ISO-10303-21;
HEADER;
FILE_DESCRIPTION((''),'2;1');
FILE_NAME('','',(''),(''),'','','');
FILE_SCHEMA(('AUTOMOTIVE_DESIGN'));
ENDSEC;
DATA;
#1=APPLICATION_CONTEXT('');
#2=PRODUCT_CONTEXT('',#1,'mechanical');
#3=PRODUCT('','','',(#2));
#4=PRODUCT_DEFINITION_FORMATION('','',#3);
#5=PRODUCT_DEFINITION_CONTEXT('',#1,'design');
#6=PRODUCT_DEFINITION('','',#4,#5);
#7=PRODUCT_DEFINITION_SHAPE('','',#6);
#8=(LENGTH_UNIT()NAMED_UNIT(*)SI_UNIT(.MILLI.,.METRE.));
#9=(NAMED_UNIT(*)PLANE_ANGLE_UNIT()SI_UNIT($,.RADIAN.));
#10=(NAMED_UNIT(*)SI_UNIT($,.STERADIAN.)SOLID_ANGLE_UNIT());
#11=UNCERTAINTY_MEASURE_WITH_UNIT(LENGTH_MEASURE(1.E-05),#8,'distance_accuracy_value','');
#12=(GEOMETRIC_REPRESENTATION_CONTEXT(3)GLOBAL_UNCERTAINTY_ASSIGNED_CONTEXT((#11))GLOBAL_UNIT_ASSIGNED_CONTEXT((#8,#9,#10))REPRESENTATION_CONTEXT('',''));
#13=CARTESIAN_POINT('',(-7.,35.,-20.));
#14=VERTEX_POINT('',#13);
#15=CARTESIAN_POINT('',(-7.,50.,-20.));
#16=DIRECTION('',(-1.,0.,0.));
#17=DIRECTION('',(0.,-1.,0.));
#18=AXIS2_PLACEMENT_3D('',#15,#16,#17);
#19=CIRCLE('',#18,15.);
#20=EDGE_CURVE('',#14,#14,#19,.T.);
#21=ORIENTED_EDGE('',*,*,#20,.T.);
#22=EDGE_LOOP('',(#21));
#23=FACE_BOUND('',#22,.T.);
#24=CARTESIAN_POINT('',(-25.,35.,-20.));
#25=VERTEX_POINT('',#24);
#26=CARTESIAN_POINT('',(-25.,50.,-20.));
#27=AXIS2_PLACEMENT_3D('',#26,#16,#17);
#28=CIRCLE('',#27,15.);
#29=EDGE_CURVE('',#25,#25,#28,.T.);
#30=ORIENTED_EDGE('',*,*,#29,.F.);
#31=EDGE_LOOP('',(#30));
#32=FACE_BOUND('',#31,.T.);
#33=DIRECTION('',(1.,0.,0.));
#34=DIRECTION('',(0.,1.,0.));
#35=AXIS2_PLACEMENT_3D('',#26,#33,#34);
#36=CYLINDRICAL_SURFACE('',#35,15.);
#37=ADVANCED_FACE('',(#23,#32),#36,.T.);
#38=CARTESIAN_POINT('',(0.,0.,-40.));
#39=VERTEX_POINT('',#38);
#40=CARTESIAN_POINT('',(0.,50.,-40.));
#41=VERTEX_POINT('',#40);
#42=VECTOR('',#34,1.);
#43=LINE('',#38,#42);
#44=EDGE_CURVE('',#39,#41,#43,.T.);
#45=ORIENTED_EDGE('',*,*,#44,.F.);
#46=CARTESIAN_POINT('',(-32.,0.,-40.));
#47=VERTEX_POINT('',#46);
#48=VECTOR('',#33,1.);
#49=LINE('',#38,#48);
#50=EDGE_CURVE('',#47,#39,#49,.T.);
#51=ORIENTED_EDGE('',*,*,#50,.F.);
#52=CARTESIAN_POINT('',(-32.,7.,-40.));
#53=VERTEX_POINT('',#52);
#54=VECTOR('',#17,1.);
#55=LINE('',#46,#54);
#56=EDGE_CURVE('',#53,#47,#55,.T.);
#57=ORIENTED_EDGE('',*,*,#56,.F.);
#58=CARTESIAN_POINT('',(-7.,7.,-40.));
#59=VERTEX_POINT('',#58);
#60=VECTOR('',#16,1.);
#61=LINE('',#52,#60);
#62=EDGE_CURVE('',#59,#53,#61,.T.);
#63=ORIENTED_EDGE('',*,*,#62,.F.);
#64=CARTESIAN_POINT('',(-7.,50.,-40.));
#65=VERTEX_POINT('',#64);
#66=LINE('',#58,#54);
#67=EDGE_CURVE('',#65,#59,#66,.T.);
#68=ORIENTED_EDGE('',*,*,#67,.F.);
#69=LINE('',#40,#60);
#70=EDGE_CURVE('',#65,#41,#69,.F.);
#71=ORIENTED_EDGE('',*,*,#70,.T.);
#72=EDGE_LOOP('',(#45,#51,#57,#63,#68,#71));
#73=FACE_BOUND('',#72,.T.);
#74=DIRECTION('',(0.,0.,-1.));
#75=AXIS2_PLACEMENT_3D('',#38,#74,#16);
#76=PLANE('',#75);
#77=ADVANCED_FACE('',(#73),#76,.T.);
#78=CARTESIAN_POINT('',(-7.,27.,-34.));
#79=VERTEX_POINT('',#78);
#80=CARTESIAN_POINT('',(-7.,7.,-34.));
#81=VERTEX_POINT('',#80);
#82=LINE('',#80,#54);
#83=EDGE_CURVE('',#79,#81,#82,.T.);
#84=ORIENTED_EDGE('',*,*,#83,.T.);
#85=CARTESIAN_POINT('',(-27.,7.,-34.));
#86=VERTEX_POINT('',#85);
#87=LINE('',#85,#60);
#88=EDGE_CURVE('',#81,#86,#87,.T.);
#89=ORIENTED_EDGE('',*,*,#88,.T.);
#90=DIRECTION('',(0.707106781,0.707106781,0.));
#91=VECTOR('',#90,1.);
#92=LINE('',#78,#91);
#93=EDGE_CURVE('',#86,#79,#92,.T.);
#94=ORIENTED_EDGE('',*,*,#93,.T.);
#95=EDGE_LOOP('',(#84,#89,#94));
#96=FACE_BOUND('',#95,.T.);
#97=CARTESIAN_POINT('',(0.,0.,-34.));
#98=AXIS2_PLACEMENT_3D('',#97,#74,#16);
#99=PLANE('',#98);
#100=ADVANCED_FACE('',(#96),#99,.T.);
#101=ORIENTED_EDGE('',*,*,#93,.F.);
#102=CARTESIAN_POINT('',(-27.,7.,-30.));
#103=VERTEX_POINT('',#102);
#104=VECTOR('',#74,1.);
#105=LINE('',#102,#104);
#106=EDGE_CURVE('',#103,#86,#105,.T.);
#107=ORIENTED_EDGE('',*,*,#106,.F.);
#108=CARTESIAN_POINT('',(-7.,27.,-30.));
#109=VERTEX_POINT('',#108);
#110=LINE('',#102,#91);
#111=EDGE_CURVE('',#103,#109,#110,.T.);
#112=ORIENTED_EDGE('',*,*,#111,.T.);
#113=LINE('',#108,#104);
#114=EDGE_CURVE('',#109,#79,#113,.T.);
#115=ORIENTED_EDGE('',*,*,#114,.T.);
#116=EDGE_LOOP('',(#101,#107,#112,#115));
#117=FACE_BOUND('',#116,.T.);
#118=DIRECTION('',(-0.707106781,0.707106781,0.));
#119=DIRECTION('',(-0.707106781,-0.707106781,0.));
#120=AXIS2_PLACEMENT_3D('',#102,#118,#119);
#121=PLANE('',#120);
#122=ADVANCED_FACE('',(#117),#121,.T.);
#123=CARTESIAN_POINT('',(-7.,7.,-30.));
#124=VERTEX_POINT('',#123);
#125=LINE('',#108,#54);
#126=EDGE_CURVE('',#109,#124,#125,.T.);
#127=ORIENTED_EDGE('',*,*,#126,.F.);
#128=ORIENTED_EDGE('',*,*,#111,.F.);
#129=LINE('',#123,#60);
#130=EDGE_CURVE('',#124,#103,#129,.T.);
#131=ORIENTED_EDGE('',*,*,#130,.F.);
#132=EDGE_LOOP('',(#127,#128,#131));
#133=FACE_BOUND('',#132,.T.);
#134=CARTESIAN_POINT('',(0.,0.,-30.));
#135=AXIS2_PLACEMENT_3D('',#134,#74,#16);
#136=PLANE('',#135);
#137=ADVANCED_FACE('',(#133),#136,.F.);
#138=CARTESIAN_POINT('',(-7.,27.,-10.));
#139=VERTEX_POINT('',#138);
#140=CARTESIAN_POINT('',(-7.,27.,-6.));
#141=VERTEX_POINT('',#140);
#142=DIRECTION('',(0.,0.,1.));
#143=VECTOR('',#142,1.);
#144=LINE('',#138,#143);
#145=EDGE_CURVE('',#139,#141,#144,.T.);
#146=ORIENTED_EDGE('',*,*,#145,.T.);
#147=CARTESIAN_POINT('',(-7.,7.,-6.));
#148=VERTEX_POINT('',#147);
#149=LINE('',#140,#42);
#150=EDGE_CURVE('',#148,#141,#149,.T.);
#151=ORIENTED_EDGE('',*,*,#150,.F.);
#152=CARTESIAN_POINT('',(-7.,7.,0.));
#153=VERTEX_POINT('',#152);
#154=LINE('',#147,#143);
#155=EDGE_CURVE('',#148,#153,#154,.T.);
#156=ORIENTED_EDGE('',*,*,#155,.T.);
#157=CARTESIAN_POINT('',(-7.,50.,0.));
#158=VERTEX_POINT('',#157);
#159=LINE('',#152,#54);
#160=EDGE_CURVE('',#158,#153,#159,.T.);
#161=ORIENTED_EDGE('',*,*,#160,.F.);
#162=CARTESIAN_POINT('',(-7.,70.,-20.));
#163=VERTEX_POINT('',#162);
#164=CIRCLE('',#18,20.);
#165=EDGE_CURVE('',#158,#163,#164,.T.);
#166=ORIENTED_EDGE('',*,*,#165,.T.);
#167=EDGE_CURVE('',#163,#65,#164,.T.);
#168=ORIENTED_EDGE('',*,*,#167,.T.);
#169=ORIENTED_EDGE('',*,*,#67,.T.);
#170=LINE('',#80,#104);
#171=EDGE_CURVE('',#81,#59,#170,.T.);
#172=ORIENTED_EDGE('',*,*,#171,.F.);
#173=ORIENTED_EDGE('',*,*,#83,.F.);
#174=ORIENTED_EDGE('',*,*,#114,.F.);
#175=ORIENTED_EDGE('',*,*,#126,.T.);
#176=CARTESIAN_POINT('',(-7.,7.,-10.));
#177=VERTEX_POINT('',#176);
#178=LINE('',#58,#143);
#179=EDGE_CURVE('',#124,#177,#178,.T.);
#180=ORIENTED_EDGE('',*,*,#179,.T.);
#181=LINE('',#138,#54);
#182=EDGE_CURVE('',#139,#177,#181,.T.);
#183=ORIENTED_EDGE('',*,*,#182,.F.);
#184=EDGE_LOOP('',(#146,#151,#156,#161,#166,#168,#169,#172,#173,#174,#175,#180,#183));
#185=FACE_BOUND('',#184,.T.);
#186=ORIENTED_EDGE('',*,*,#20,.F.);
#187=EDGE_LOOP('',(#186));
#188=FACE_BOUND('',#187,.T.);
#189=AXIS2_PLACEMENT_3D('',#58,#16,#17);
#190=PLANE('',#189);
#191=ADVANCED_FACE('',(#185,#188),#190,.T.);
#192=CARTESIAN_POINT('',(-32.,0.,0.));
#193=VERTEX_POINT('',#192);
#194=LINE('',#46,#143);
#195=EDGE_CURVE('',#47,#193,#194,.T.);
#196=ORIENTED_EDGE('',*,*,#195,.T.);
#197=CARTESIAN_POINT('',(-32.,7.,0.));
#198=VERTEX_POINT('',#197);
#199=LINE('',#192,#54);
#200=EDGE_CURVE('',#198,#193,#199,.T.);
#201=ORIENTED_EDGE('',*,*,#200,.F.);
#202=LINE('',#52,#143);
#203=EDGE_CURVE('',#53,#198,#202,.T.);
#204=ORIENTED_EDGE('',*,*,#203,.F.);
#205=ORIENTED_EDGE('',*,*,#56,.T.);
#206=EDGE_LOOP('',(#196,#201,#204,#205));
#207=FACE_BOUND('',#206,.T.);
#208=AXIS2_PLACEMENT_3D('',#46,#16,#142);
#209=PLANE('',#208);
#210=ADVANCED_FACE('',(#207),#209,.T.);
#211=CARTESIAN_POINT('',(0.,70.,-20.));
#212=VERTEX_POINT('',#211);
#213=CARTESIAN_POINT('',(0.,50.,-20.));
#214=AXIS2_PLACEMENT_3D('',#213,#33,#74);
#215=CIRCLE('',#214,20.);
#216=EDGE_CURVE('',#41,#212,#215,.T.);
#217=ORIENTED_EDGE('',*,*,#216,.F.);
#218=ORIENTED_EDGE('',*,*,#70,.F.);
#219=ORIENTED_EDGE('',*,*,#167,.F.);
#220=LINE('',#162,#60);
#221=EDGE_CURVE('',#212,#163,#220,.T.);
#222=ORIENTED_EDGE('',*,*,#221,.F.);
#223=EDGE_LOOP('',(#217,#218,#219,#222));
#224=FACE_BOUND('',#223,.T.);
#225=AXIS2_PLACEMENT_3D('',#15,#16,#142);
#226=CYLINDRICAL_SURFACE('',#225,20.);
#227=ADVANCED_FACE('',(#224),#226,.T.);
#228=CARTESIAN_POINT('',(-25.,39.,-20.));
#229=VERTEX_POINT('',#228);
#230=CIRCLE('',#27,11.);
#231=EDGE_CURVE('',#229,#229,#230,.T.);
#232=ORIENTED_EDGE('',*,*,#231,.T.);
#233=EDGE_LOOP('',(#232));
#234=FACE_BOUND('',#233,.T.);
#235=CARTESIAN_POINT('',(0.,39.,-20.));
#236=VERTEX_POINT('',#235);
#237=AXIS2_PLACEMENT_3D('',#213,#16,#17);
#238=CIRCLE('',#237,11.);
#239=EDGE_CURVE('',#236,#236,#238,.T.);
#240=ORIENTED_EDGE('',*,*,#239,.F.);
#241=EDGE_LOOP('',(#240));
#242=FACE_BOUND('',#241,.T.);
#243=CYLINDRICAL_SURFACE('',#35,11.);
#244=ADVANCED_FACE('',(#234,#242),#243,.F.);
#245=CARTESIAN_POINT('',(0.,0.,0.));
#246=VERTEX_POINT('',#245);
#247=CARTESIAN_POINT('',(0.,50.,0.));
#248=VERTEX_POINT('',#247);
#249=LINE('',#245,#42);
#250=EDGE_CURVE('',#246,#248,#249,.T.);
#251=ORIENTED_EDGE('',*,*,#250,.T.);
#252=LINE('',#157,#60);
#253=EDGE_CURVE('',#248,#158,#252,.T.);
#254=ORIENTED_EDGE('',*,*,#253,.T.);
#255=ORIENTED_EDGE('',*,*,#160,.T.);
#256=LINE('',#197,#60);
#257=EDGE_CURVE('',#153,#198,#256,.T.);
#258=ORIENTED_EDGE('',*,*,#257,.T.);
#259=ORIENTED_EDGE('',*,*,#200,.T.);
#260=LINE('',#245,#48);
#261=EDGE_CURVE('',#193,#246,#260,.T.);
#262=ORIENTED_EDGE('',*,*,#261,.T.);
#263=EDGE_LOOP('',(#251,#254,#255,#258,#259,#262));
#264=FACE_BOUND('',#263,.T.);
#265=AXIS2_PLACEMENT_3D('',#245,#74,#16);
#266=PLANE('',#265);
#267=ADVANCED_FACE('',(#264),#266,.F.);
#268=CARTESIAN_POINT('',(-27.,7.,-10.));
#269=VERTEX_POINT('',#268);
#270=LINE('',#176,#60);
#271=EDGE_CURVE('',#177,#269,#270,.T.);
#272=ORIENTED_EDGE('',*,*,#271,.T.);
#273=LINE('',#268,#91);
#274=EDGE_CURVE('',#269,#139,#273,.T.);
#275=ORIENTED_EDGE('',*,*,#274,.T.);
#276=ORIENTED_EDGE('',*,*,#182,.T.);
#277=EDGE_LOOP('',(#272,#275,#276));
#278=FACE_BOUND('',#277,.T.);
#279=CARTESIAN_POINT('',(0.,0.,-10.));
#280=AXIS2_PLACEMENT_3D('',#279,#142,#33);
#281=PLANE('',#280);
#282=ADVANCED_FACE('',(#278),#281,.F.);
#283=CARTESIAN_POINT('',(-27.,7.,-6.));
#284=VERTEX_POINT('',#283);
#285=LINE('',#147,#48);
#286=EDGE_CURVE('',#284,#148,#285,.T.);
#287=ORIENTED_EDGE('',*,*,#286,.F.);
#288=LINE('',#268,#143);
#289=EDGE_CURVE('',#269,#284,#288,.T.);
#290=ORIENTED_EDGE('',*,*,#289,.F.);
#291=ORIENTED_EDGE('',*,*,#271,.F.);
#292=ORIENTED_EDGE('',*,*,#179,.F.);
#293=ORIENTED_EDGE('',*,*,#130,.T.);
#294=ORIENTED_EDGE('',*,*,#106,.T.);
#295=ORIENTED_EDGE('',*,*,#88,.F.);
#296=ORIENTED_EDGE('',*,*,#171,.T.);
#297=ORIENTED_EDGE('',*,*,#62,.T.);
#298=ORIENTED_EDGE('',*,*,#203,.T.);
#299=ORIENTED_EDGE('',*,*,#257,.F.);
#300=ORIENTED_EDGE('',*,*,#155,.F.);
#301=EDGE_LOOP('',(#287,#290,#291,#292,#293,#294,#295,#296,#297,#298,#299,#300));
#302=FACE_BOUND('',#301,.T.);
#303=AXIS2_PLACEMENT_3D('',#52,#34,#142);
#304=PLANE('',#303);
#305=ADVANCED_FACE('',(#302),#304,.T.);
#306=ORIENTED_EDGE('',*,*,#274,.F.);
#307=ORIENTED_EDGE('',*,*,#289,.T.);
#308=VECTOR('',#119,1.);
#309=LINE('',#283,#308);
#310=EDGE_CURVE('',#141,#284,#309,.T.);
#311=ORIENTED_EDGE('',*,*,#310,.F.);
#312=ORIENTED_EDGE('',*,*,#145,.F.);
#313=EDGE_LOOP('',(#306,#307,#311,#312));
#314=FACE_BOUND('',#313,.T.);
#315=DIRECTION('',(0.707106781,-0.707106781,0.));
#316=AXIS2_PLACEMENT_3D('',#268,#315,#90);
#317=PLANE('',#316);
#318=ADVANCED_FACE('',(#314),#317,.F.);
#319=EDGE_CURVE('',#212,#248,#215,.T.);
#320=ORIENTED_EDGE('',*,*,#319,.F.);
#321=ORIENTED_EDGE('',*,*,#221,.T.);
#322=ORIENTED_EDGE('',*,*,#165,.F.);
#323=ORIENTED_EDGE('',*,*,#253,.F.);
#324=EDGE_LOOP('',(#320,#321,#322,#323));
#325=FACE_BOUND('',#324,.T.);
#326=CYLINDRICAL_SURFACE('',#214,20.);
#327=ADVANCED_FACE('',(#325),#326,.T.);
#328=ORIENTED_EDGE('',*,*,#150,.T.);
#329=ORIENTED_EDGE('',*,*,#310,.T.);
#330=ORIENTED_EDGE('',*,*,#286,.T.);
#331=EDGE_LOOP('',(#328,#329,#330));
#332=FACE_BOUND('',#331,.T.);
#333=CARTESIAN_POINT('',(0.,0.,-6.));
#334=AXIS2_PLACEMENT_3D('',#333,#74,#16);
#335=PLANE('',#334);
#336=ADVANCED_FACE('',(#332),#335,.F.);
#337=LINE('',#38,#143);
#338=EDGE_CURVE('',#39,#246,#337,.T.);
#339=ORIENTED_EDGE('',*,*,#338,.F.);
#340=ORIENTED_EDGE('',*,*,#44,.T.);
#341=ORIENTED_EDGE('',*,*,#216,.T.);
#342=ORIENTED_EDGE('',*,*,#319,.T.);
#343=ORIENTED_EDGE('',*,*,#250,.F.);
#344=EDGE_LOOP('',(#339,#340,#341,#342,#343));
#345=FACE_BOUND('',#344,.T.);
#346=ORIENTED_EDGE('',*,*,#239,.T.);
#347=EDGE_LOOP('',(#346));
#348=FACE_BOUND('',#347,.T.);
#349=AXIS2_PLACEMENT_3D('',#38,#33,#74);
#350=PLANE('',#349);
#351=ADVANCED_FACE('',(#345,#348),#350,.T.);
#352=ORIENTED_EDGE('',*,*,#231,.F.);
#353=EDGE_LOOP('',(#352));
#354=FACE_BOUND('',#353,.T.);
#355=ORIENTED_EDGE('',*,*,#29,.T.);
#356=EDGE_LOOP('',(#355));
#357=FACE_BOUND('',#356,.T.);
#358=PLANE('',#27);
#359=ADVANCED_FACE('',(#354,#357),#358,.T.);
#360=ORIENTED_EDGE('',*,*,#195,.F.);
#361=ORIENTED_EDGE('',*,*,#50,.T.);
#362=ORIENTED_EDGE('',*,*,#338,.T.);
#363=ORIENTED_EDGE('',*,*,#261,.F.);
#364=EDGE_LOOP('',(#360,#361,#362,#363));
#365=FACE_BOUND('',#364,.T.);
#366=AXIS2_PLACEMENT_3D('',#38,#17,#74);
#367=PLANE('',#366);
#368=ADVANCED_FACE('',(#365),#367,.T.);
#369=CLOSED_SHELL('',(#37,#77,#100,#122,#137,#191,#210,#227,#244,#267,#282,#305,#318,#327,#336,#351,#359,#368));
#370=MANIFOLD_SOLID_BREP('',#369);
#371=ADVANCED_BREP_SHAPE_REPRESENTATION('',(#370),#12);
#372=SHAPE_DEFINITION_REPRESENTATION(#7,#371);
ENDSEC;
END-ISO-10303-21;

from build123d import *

# Parameters (mm, degrees)
BOSS_EXTRUDE1_DEPTH = 40
FILLET1_R           = 20
BOSS_EXTRUDE2_DEPTH = 10
CUT_EXTRUDE1_DEPTH  = 6
BOSS_EXTRUDE3_DEPTH = 10
CUT_EXTRUDE3_DEPTH  = 6
SKETCH15_R          = 15
SKETCH15_R_2        = 11
BOSS_EXTRUDE4_DEPTH = 18
CUT_EXTRUDE4_START  = -7
SKETCH16_R          = 11
CUT_EXTRUDE4_DEPTH  = 7


with BuildPart() as part:
    # Sketch1 → Boss-Extrude1 (new body)
    with BuildSketch(Plane.XY):
        Polygon((0, 0), (-32, 0), (-32, 7), (-7, 7), (-7, 70), (0, 70), align=None)
    extrude(amount=-BOSS_EXTRUDE1_DEPTH)

    # Fillet1
    fillet1_edges = [part.edges().sort_by_distance(p)[0] for p in [
        (-3.5, 70, 0),
        (-3.5, 70, -40),
    ]]
    fillet(fillet1_edges, radius=FILLET1_R - 0.0001)  # a hair under: the kernel refuses the full size

    # Sketch7 → Boss-Extrude2 (add)
    with BuildSketch(Plane.XY):
        Polygon((-7, 7), (-27, 7), (-7, 27), align=None)
    extrude(amount=-BOSS_EXTRUDE2_DEPTH)

    # Sketch11 → Cut-Extrude1 (cut)
    with BuildSketch(Plane.XY):
        Polygon((-7, 27), (-7, 7), (-27, 7), align=None)
    extrude(amount=-CUT_EXTRUDE1_DEPTH, mode=Mode.SUBTRACT)

    # Sketch12 → Boss-Extrude3 (add)
    with BuildSketch(Plane(origin=(0, 0, -40), x_dir=(-1, 0, 0), z_dir=(0, 0, -1))):
        Polygon((7, 27), (7, 7), (27, 7), align=None)
    extrude(amount=-BOSS_EXTRUDE3_DEPTH)

    # Sketch13 → Cut-Extrude3 (cut)
    with BuildSketch(Plane(origin=(0, 0, -40), x_dir=(-1, 0, 0), z_dir=(0, 0, -1))):
        Polygon((7, 27), (27, 7), (7, 7), align=None)
    extrude(amount=-CUT_EXTRUDE3_DEPTH, mode=Mode.SUBTRACT)

    # Sketch15 → Boss-Extrude4 (add)
    with BuildSketch(Plane.ZY.offset(7)):
        with Locations(Location((-20, 50, 0), (0, 0, 270))):
            Circle(SKETCH15_R)
        with Locations(Location((-20, 50, 0), (0, 0, 270))):
            Circle(SKETCH15_R_2, mode=Mode.SUBTRACT)
    extrude(amount=BOSS_EXTRUDE4_DEPTH)

    # Sketch16 → Cut-Extrude4 (cut)
    with BuildSketch(Plane.ZY.offset(7).offset(CUT_EXTRUDE4_START)):
        with Locations(Location((-20, 50, 0), (0, 0, 270))):
            Circle(SKETCH16_R)
    extrude(amount=CUT_EXTRUDE4_DEPTH, mode=Mode.SUBTRACT)


solid = part.part
